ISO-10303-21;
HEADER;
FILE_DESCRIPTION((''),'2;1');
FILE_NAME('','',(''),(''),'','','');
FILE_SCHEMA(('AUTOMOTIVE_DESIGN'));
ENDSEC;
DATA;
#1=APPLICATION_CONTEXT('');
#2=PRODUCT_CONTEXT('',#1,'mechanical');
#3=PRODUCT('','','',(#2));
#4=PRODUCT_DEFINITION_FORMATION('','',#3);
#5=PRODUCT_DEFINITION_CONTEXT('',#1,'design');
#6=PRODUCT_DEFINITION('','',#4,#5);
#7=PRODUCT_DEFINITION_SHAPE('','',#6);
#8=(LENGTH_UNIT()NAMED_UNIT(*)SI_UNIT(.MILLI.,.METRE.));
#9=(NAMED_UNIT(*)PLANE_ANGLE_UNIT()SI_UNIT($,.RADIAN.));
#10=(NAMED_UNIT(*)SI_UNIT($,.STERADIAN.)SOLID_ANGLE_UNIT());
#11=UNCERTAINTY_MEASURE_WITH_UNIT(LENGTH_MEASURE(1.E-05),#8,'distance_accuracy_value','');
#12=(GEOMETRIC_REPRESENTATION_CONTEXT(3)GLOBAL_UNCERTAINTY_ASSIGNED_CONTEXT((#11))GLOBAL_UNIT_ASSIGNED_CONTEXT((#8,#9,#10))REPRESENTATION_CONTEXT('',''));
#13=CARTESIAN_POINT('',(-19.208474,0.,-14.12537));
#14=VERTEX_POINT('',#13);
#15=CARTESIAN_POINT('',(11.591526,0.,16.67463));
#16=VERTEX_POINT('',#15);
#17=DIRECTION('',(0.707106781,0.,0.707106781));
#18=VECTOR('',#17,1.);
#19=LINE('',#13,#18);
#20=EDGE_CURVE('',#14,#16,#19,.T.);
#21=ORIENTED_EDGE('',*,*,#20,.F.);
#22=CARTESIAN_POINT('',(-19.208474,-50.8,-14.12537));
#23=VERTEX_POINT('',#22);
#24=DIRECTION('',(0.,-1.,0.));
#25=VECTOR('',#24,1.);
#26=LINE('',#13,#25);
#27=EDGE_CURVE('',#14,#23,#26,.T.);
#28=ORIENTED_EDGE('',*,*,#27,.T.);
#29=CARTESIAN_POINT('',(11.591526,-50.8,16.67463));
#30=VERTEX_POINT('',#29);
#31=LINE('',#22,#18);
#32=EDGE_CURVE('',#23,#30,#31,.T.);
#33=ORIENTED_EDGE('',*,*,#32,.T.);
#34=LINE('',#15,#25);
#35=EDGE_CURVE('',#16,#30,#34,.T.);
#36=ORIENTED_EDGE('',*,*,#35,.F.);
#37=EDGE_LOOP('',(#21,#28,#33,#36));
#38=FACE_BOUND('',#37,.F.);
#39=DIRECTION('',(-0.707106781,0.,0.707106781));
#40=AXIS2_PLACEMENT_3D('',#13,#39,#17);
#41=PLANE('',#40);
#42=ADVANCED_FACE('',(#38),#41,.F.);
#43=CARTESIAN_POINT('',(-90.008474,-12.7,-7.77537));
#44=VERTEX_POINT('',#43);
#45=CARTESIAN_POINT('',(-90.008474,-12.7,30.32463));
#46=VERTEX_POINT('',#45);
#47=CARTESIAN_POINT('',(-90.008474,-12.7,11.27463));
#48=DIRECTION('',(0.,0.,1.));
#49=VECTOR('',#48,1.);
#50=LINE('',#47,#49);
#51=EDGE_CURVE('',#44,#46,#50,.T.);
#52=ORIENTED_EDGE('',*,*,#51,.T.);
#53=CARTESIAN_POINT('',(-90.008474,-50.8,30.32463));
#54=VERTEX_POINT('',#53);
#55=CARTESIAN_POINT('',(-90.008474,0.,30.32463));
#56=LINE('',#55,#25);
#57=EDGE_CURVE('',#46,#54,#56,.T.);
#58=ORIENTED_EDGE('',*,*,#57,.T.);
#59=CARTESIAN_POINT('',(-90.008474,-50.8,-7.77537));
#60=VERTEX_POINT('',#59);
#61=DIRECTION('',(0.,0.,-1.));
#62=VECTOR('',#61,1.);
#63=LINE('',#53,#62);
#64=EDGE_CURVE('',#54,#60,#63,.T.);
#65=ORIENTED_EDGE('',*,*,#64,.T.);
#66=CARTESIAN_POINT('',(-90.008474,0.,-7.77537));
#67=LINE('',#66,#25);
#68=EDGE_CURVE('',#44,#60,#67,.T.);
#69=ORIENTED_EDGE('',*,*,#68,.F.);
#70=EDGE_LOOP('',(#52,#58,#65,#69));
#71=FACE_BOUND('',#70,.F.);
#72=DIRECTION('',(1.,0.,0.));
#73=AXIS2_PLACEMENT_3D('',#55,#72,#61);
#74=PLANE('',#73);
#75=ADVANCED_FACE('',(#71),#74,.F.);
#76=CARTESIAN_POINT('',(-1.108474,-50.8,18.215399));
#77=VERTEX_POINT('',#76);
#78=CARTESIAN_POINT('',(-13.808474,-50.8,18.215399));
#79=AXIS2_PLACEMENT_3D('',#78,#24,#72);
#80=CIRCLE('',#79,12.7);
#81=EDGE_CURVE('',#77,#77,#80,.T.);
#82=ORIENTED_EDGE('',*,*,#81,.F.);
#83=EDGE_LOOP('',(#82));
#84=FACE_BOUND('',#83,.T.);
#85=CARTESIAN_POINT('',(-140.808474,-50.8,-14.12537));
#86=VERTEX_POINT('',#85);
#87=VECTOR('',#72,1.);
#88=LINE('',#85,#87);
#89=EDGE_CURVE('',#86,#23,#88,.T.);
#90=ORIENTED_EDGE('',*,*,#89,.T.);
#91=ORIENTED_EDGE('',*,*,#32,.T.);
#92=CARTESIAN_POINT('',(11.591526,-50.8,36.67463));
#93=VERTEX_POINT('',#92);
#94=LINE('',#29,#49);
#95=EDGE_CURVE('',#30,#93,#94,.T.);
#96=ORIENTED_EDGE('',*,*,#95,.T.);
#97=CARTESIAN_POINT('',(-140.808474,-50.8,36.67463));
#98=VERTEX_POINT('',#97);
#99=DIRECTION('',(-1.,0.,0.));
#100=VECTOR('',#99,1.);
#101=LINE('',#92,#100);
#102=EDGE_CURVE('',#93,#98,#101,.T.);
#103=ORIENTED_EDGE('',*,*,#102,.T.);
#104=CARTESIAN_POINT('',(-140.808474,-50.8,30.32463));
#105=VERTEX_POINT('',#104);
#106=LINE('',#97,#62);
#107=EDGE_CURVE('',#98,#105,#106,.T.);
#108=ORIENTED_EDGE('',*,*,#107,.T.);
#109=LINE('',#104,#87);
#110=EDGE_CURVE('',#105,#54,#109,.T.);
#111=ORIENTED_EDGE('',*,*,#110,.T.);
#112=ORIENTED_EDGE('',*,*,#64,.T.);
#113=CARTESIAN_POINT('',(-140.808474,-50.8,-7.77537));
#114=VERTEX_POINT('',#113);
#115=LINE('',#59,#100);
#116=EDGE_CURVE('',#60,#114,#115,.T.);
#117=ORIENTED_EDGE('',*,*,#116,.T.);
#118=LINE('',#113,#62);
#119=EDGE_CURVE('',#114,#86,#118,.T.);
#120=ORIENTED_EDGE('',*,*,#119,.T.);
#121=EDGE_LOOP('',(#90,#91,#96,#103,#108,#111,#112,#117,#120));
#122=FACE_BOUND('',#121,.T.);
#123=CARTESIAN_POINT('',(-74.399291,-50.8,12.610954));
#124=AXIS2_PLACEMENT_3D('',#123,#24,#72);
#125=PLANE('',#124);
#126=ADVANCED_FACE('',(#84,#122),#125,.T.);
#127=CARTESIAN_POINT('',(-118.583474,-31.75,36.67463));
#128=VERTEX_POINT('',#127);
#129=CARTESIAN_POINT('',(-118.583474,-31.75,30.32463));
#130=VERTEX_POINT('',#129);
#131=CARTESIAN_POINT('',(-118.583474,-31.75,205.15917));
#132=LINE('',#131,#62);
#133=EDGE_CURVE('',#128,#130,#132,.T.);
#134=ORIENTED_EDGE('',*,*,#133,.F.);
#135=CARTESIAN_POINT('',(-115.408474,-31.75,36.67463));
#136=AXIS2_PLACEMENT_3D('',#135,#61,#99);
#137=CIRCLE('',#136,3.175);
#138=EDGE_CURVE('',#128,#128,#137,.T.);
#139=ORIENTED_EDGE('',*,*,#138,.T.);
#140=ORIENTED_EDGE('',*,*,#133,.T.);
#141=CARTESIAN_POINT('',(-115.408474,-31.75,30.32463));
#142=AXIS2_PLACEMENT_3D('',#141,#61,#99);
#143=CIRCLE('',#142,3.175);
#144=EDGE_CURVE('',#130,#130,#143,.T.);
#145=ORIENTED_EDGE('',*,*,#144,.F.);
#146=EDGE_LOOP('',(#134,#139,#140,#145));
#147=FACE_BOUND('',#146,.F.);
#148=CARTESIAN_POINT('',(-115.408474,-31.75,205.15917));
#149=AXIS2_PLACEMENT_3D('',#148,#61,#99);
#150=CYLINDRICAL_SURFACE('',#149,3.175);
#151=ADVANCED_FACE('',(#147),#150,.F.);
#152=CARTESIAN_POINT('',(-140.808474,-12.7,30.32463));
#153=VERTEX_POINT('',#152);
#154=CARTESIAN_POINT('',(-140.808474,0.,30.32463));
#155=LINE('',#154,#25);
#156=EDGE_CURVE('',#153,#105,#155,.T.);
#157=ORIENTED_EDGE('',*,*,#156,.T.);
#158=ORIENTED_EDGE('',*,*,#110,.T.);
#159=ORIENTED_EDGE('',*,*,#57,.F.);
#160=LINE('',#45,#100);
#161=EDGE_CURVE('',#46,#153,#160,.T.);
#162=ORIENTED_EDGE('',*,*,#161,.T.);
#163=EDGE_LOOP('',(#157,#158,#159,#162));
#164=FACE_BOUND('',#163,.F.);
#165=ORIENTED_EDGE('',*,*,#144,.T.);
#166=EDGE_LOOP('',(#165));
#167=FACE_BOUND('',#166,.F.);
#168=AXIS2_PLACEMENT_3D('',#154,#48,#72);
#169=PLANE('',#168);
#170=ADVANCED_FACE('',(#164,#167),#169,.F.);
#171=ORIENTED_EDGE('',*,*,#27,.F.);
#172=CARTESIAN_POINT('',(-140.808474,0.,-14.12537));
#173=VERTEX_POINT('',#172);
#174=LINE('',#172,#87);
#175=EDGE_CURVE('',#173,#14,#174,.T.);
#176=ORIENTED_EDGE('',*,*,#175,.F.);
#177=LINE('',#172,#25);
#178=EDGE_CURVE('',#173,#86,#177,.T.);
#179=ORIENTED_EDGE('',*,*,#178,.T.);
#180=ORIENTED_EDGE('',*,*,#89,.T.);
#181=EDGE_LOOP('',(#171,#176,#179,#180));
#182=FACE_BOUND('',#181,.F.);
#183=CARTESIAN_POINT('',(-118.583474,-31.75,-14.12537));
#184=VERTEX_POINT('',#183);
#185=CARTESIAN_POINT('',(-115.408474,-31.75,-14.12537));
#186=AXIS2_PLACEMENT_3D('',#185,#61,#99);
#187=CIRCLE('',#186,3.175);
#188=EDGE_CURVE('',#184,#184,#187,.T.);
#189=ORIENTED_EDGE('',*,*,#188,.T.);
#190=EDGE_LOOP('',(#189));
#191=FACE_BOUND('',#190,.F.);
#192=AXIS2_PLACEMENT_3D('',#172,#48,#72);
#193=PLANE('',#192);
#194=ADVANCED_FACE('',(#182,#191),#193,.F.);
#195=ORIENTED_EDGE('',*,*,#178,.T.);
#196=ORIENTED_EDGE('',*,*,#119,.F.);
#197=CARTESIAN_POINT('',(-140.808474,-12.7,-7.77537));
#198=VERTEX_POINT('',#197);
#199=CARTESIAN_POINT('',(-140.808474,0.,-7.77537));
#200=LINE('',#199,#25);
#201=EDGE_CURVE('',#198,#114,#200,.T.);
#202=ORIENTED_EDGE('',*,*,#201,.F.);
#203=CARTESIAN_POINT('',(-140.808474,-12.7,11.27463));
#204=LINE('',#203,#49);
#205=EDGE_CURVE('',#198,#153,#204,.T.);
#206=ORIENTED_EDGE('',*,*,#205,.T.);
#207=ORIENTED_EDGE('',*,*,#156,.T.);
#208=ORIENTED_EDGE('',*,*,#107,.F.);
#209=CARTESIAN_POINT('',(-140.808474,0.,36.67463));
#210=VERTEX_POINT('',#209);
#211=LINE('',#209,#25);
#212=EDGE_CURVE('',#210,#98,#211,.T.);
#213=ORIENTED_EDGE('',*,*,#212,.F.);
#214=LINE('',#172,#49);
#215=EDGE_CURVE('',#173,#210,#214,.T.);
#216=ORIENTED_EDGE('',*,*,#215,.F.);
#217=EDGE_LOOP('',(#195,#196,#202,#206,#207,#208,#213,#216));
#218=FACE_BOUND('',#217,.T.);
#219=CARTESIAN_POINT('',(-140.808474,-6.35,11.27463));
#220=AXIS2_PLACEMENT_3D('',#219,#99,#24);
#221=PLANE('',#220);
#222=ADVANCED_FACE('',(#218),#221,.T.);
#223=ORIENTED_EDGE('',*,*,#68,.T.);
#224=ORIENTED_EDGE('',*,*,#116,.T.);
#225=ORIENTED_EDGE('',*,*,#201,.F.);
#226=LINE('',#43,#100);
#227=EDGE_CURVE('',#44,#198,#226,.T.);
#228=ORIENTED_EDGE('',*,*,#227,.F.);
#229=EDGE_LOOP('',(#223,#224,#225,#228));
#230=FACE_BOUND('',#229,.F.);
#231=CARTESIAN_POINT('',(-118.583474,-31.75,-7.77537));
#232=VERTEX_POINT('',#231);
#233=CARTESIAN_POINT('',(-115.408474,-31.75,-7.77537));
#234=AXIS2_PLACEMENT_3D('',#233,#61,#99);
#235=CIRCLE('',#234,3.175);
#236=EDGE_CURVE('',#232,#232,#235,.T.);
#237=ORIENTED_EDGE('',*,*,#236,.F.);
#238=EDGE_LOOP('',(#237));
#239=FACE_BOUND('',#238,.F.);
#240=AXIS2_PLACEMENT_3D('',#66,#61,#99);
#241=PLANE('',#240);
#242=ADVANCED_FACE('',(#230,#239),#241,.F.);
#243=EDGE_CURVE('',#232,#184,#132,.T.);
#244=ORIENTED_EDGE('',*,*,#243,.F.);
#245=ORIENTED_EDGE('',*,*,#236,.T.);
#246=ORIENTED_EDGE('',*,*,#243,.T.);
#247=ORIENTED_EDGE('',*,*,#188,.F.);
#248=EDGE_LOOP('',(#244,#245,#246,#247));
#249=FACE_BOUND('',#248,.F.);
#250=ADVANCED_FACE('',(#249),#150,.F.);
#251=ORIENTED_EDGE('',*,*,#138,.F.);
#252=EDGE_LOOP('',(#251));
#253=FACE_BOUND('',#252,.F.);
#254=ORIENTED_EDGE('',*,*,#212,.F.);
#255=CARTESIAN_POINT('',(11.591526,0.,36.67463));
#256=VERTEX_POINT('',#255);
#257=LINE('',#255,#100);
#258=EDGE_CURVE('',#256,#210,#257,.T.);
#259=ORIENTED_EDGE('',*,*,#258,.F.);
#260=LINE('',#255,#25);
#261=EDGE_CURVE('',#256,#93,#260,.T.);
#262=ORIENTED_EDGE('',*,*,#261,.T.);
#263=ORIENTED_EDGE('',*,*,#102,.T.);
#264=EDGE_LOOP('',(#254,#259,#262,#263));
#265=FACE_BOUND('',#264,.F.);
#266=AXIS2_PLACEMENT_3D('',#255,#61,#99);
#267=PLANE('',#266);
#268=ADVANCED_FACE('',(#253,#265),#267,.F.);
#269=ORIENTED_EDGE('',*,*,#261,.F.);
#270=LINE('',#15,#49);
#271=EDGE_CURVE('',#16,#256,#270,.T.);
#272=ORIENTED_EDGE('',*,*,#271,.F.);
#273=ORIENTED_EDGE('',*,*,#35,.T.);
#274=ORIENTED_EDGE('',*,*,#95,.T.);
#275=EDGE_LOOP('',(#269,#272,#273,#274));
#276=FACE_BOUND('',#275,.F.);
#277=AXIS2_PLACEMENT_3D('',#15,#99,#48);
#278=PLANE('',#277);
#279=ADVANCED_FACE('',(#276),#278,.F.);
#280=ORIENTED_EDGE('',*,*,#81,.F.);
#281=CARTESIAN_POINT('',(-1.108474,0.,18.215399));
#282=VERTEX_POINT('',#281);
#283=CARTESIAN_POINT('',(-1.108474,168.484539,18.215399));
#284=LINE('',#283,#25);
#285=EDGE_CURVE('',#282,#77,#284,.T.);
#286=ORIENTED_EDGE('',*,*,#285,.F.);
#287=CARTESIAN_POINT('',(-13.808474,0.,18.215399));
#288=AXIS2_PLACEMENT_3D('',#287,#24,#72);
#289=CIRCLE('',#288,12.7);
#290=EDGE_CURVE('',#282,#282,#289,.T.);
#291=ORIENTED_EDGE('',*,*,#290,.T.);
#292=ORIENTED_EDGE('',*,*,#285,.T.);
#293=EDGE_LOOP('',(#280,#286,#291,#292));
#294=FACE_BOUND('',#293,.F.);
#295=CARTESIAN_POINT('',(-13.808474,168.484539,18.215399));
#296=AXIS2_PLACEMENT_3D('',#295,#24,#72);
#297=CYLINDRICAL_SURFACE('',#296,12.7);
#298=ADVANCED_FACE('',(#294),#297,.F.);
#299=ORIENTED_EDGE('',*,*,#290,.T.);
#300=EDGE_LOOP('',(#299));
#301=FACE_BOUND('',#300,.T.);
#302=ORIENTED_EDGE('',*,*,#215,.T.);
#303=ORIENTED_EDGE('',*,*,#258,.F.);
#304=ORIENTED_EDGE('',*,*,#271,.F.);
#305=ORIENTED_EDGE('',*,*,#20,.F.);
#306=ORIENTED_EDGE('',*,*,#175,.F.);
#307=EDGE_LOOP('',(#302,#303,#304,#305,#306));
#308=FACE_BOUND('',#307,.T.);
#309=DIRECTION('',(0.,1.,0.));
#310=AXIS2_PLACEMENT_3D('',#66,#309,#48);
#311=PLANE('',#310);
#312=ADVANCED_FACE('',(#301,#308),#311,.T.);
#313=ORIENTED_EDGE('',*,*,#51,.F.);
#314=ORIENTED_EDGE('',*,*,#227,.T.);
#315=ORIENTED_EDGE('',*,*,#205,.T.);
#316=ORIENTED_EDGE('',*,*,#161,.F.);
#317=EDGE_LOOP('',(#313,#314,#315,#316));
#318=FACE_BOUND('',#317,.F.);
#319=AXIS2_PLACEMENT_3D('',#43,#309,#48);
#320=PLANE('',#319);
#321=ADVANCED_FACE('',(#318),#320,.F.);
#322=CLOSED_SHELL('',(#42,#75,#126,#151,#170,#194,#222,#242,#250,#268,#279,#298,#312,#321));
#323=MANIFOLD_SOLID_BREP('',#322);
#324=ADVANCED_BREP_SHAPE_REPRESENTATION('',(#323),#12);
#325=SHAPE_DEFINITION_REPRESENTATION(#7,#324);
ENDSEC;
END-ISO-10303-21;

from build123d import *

# Parameters (mm, degrees)
F1_DEPTH = 50.8
F2_W     = 12.7
F2_H     = 38.1
F3_DEPTH = 50.8
F5_D     = 25.4
F7_D     = 6.35


# Not quite as in the source:
# - a feature names something its author has since deleted; it is built from what else it names


with BuildPart() as f1:
    # F0 (on Front) → F1 (new body)
    with BuildSketch(Plane.XZ):
        Polygon((-140.8084735786, 36.6746302678), (-140.8084735786, 30.3246302678), (-90.0084735786, 30.3246302678), (-90.0084735786, -7.7753697322), (-140.8084735786, -7.7753697322), (-140.8084735786, -14.1253697322), (-19.2084735786, -14.1253697322), (11.5915264214, 16.6746302678), (11.5915264214, 36.6746302678), align=None)
    extrude(amount=F1_DEPTH)

    # F2 (on face) → F3 (join)
    with BuildSketch(Plane(origin=(-90.0084735786, 0, 0), x_dir=(0, -1, 0), z_dir=(-1, 0, 0))):
        with Locations((6.35, 11.2746302678)):
            Rectangle(F2_W, F2_H)
    extrude(amount=F3_DEPTH)

    # F5 (through all)
    with Locations(Plane(origin=(0, 0, 0), x_dir=(-1, 0, 0), z_dir=(0, 1, 0))):
        with Locations((13.8084735786, 18.215398631)):
            Hole(F5_D / 2)

    # F7 (through all)
    with Locations(Plane.XY.offset(36.6746302678)):
        with Locations((-115.4084735786, -31.75)):
            Hole(F7_D / 2)


solid = f1.part
